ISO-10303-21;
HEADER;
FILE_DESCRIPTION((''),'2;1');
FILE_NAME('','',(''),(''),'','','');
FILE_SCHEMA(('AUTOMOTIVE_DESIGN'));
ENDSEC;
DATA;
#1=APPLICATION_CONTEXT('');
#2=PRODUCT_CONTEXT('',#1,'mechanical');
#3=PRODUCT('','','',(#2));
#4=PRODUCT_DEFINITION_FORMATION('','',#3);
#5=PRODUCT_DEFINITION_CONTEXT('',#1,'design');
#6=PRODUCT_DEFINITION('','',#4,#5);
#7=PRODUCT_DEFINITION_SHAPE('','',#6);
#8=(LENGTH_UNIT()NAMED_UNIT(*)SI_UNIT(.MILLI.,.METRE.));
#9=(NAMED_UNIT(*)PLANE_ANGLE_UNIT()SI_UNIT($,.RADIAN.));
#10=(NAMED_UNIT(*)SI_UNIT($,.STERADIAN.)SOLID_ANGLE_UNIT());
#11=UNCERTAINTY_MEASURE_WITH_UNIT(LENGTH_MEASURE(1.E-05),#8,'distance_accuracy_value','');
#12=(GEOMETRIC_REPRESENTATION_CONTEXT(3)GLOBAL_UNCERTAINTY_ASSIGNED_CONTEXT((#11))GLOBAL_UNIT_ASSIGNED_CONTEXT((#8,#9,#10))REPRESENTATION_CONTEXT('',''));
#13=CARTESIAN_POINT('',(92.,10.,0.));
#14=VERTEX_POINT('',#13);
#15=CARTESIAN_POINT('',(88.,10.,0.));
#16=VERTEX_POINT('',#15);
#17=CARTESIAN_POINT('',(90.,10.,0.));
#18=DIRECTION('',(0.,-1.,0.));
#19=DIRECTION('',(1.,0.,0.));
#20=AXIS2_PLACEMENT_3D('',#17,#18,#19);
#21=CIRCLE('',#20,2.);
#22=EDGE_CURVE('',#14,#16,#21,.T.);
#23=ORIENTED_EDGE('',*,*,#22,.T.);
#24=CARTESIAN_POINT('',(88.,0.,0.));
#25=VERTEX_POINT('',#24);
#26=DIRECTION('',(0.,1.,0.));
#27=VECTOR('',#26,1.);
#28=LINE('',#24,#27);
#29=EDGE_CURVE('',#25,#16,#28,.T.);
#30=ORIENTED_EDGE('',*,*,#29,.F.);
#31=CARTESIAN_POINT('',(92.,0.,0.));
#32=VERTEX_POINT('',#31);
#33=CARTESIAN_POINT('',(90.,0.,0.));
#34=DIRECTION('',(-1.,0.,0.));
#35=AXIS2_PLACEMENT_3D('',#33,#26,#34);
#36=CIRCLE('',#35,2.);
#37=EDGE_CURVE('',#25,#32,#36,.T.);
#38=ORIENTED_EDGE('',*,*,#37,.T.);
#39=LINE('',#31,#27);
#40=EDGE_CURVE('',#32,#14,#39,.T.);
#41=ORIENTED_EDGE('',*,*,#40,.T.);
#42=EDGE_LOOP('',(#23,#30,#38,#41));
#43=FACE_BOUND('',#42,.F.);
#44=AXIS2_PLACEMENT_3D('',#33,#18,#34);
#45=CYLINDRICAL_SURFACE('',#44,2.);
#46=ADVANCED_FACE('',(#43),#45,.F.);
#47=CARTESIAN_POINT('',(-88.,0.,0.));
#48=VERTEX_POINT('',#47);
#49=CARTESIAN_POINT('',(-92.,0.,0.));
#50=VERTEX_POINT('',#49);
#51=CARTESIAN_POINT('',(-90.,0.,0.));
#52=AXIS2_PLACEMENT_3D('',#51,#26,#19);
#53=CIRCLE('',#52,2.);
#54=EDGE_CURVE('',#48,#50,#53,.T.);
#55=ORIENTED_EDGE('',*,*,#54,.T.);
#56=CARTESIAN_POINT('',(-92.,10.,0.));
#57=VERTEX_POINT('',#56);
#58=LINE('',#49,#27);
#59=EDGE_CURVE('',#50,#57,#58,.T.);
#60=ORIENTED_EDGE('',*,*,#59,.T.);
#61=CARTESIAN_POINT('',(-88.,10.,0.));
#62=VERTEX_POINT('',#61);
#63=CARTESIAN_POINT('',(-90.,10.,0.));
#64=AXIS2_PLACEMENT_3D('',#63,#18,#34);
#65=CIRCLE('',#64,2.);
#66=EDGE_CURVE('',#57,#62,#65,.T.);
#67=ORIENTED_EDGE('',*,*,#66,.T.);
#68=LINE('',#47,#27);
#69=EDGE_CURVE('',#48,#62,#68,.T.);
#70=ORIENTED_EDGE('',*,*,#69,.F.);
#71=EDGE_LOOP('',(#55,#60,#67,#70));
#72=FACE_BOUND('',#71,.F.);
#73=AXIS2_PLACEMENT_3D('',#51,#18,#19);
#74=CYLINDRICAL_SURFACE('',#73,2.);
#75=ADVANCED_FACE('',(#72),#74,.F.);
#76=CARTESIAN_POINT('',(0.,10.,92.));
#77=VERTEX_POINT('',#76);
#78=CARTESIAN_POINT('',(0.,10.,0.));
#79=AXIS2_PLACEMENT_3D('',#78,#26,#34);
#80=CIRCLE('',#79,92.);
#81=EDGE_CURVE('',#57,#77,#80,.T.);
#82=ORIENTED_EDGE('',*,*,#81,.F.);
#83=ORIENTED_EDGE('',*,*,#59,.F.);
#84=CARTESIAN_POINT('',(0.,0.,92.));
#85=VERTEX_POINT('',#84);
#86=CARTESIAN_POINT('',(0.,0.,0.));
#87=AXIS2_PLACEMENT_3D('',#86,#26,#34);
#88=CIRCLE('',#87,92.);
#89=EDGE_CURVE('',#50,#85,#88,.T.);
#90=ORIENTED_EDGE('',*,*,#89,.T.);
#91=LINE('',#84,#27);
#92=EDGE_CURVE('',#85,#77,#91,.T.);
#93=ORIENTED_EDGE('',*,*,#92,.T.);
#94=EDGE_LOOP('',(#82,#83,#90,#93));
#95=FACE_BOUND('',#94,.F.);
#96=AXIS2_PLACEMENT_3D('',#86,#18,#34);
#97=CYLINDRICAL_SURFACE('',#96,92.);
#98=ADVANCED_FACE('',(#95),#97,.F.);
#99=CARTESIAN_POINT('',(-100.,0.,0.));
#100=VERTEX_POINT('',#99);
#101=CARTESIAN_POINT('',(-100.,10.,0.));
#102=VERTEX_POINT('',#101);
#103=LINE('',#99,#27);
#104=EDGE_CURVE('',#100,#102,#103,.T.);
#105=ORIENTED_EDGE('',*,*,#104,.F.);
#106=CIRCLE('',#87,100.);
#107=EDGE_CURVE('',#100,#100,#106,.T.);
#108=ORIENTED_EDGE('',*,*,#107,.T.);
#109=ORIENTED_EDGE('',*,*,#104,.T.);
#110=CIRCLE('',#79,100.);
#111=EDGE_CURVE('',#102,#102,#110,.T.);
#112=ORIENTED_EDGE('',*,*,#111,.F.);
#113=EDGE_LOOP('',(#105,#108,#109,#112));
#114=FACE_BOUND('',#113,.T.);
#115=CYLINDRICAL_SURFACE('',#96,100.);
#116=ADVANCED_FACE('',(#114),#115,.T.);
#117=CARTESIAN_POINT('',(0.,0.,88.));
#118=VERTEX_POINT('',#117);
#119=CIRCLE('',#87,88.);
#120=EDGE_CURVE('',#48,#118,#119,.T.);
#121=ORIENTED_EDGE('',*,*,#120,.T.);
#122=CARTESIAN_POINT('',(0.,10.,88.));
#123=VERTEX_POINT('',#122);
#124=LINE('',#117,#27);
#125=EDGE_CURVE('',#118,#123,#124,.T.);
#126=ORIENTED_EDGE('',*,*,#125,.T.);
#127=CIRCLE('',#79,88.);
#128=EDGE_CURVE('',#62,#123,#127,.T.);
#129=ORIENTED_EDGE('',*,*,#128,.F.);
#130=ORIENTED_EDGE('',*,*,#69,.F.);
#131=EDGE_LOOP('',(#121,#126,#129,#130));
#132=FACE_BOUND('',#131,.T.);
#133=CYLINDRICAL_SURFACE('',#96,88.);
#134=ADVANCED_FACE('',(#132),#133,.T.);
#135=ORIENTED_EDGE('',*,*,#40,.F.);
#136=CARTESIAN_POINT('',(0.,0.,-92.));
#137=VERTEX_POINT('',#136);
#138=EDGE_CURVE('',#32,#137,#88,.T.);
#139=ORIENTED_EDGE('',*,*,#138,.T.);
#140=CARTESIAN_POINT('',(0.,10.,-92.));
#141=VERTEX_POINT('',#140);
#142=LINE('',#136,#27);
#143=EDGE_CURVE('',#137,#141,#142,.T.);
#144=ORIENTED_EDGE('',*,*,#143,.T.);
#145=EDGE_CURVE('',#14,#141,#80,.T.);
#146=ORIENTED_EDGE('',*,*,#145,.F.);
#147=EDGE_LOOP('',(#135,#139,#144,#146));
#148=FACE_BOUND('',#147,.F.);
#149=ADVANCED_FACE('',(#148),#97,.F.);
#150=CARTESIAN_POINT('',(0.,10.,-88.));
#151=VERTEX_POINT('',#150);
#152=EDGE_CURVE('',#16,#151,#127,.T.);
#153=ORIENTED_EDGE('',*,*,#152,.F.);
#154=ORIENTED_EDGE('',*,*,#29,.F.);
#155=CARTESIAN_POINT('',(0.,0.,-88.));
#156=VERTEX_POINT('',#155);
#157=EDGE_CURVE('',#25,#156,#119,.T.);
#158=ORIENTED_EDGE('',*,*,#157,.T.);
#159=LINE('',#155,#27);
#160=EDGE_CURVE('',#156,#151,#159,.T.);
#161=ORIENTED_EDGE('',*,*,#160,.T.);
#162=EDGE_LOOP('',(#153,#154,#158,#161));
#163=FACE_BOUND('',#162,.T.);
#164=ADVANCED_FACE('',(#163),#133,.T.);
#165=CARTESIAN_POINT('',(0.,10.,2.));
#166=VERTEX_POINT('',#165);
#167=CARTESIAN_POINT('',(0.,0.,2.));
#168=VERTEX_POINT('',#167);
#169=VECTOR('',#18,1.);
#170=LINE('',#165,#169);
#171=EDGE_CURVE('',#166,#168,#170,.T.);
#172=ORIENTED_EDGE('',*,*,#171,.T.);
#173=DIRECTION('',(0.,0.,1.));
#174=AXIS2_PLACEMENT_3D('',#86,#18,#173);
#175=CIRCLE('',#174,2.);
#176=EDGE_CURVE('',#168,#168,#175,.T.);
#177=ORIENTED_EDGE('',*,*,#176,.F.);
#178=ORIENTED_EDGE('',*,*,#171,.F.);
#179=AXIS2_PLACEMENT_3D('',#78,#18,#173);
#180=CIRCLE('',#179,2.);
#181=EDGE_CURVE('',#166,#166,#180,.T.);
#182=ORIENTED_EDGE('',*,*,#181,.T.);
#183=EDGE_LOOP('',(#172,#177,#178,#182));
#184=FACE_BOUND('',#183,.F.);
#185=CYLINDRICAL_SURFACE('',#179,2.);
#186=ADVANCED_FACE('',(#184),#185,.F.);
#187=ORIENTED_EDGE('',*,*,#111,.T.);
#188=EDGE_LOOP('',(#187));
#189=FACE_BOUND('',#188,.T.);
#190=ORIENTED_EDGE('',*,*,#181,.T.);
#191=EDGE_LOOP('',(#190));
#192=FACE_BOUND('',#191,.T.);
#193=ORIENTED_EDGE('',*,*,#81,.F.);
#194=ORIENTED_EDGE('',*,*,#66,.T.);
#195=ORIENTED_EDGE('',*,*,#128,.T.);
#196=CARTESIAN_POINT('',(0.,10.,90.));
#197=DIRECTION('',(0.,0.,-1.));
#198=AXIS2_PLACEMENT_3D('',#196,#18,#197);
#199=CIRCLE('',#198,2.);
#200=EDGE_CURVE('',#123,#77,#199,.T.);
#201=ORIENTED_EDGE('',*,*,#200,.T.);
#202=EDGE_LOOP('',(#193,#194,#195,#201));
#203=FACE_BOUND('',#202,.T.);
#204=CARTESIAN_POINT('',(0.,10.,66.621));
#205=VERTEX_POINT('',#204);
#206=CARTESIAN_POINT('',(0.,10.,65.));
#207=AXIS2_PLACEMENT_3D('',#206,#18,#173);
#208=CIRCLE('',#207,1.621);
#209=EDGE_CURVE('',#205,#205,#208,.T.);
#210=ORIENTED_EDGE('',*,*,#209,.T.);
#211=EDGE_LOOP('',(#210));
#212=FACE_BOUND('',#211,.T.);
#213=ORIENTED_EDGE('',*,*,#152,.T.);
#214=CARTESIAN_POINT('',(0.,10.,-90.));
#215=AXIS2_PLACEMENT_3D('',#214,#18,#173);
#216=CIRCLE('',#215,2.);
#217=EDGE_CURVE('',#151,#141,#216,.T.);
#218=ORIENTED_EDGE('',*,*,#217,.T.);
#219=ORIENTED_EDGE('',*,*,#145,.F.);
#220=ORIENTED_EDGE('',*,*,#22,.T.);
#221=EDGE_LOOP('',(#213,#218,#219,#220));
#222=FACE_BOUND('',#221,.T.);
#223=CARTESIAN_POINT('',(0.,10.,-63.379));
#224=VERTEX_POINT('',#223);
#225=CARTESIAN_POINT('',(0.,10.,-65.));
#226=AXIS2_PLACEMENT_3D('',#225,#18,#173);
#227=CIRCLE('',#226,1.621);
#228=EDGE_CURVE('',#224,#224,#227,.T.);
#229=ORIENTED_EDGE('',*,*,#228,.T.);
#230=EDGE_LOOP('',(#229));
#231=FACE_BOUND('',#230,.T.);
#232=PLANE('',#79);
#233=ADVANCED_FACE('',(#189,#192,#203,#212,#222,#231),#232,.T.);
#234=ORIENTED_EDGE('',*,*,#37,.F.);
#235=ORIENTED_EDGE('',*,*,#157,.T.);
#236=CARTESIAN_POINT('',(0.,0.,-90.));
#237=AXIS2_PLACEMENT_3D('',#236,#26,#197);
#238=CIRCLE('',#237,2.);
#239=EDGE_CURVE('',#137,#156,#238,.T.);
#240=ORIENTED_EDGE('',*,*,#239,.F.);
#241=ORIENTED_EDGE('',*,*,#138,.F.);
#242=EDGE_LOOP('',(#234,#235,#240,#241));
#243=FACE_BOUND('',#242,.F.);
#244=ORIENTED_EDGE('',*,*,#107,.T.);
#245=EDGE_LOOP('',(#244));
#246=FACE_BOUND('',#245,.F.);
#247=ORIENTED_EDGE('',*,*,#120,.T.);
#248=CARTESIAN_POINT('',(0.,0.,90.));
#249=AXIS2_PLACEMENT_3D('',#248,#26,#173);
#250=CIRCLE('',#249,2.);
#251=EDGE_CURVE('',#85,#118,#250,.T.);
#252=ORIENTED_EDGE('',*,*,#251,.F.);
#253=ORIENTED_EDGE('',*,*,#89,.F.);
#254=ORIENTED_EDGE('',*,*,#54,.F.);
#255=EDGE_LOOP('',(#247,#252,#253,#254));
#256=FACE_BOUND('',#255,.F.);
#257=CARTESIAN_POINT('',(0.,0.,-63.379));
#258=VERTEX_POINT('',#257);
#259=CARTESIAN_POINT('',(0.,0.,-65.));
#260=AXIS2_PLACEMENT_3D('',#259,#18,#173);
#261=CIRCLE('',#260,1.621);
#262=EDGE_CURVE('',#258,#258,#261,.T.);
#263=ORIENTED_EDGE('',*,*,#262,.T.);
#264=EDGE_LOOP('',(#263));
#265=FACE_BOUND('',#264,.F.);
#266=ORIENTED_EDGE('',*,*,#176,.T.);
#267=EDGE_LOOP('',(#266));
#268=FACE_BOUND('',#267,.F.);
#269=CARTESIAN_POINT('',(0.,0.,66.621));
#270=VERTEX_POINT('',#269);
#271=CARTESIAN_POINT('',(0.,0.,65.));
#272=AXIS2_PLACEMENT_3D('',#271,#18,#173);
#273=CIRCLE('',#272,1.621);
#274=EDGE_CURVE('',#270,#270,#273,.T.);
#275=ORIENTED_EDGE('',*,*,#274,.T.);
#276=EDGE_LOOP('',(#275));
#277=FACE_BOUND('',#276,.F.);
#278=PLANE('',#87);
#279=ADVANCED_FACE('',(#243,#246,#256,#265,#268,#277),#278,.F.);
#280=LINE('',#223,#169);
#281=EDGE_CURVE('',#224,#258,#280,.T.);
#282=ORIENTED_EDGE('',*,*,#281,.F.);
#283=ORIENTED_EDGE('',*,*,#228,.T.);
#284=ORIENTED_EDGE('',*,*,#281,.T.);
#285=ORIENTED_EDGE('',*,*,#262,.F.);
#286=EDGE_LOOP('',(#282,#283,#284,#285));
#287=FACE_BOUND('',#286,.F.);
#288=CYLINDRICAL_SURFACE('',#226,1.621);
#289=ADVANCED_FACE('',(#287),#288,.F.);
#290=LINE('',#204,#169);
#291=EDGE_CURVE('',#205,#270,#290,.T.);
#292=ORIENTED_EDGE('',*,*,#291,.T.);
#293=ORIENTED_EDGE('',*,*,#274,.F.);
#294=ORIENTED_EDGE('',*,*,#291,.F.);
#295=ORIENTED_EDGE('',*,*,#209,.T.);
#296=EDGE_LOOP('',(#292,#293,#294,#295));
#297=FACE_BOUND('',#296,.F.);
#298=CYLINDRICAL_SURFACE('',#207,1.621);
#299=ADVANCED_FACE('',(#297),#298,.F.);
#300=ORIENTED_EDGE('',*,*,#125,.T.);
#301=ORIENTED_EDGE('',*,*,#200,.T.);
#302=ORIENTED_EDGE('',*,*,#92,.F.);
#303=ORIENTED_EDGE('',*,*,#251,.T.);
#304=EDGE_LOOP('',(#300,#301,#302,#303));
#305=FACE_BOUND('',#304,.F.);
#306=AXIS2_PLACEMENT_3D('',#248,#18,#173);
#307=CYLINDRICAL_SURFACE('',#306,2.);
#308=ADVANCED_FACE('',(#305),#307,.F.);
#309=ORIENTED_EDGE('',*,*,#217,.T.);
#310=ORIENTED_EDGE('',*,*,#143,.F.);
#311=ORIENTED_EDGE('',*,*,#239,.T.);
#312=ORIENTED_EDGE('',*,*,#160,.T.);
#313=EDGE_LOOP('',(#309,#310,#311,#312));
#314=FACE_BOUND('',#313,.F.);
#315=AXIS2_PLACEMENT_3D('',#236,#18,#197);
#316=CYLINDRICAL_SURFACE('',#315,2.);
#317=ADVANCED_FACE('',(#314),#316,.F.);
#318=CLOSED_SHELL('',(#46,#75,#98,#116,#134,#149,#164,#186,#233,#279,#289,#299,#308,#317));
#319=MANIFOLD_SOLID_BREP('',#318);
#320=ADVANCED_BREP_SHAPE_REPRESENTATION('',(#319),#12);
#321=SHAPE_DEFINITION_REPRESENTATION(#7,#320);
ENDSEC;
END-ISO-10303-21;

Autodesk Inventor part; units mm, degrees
ref_plane "YZ Plane" through (0, 0, 0) normal (1, 0, 0) x (0, 1, 0)
ref_plane "XZ Plane" through (0, 0, 0) normal (0, 1, 0) x (-1, 0, 0)
ref_plane "XY Plane" through (0, 0, 0) normal (0, 0, 1) x (1, 0, 0)
sketch "Sketch1" plane through (0, 0, 0) normal (0, 1, 0) x (-1, 0, 0)
  circle A0 centre (0, 0) radius 100
  circle A1 centre (0, 0) radius 80
  circle A2 centre (0, 0) radius 90
  circle A3 centre (0, 0) radius 88
  circle A4 centre (0, 0) radius 92
  arc A5 (88, 0) -> (92, 0) centre (90, 0) ccw
  arc A6 (0, 92) -> (0, 88) centre (0, 90) ccw
  arc A7 (-88, 0) -> (-92, 0) centre (-90, 0) ccw
  arc A8 (0, -92) -> (0, -88) centre (0, -90) ccw
  dimension "d0" = 200
  dimension "d3" = 20
  dimension "d4" = 10
  dimension "d5" = 2
  dimension "d6" = 2
extrude "Extrusion1" add sketch "Sketch1" along normal blind 10 contours A0 | A1 | A6 A3 A7 A2 | A2 A7 A4 A6 | A5 A4 A8 A2 | A2 A8 A3 A5 | A3
sketch "Sketch2" plane through (0, 10, 0) normal (0, 1, 0) x (1, 0, 0)
  line L0 (0, 0) -> (0, -65)
  line L1 (0, -65) -> (0, 65)
  dimension "d7" = 65
  dimension "d8" = 130
hole "Hole1" at (0, 10, 65) at (0, 10, -65) direction (0, -1, 0) diameter 3.242 end through all thread size "M4x0.7" class "6H" standard "ISO Metric profile"
sketch "Sketch3" plane through (0, 10, 0) normal (0, 1, 0) x (1, 0, 0)
  point P0 (0, 0)
  point P1 (0, 0)
hole "Hole2" at (0, 10, 0) direction (0, -1, 0) diameter 4 end through all
properties part number "Aufhängung_Drehscheibe"
